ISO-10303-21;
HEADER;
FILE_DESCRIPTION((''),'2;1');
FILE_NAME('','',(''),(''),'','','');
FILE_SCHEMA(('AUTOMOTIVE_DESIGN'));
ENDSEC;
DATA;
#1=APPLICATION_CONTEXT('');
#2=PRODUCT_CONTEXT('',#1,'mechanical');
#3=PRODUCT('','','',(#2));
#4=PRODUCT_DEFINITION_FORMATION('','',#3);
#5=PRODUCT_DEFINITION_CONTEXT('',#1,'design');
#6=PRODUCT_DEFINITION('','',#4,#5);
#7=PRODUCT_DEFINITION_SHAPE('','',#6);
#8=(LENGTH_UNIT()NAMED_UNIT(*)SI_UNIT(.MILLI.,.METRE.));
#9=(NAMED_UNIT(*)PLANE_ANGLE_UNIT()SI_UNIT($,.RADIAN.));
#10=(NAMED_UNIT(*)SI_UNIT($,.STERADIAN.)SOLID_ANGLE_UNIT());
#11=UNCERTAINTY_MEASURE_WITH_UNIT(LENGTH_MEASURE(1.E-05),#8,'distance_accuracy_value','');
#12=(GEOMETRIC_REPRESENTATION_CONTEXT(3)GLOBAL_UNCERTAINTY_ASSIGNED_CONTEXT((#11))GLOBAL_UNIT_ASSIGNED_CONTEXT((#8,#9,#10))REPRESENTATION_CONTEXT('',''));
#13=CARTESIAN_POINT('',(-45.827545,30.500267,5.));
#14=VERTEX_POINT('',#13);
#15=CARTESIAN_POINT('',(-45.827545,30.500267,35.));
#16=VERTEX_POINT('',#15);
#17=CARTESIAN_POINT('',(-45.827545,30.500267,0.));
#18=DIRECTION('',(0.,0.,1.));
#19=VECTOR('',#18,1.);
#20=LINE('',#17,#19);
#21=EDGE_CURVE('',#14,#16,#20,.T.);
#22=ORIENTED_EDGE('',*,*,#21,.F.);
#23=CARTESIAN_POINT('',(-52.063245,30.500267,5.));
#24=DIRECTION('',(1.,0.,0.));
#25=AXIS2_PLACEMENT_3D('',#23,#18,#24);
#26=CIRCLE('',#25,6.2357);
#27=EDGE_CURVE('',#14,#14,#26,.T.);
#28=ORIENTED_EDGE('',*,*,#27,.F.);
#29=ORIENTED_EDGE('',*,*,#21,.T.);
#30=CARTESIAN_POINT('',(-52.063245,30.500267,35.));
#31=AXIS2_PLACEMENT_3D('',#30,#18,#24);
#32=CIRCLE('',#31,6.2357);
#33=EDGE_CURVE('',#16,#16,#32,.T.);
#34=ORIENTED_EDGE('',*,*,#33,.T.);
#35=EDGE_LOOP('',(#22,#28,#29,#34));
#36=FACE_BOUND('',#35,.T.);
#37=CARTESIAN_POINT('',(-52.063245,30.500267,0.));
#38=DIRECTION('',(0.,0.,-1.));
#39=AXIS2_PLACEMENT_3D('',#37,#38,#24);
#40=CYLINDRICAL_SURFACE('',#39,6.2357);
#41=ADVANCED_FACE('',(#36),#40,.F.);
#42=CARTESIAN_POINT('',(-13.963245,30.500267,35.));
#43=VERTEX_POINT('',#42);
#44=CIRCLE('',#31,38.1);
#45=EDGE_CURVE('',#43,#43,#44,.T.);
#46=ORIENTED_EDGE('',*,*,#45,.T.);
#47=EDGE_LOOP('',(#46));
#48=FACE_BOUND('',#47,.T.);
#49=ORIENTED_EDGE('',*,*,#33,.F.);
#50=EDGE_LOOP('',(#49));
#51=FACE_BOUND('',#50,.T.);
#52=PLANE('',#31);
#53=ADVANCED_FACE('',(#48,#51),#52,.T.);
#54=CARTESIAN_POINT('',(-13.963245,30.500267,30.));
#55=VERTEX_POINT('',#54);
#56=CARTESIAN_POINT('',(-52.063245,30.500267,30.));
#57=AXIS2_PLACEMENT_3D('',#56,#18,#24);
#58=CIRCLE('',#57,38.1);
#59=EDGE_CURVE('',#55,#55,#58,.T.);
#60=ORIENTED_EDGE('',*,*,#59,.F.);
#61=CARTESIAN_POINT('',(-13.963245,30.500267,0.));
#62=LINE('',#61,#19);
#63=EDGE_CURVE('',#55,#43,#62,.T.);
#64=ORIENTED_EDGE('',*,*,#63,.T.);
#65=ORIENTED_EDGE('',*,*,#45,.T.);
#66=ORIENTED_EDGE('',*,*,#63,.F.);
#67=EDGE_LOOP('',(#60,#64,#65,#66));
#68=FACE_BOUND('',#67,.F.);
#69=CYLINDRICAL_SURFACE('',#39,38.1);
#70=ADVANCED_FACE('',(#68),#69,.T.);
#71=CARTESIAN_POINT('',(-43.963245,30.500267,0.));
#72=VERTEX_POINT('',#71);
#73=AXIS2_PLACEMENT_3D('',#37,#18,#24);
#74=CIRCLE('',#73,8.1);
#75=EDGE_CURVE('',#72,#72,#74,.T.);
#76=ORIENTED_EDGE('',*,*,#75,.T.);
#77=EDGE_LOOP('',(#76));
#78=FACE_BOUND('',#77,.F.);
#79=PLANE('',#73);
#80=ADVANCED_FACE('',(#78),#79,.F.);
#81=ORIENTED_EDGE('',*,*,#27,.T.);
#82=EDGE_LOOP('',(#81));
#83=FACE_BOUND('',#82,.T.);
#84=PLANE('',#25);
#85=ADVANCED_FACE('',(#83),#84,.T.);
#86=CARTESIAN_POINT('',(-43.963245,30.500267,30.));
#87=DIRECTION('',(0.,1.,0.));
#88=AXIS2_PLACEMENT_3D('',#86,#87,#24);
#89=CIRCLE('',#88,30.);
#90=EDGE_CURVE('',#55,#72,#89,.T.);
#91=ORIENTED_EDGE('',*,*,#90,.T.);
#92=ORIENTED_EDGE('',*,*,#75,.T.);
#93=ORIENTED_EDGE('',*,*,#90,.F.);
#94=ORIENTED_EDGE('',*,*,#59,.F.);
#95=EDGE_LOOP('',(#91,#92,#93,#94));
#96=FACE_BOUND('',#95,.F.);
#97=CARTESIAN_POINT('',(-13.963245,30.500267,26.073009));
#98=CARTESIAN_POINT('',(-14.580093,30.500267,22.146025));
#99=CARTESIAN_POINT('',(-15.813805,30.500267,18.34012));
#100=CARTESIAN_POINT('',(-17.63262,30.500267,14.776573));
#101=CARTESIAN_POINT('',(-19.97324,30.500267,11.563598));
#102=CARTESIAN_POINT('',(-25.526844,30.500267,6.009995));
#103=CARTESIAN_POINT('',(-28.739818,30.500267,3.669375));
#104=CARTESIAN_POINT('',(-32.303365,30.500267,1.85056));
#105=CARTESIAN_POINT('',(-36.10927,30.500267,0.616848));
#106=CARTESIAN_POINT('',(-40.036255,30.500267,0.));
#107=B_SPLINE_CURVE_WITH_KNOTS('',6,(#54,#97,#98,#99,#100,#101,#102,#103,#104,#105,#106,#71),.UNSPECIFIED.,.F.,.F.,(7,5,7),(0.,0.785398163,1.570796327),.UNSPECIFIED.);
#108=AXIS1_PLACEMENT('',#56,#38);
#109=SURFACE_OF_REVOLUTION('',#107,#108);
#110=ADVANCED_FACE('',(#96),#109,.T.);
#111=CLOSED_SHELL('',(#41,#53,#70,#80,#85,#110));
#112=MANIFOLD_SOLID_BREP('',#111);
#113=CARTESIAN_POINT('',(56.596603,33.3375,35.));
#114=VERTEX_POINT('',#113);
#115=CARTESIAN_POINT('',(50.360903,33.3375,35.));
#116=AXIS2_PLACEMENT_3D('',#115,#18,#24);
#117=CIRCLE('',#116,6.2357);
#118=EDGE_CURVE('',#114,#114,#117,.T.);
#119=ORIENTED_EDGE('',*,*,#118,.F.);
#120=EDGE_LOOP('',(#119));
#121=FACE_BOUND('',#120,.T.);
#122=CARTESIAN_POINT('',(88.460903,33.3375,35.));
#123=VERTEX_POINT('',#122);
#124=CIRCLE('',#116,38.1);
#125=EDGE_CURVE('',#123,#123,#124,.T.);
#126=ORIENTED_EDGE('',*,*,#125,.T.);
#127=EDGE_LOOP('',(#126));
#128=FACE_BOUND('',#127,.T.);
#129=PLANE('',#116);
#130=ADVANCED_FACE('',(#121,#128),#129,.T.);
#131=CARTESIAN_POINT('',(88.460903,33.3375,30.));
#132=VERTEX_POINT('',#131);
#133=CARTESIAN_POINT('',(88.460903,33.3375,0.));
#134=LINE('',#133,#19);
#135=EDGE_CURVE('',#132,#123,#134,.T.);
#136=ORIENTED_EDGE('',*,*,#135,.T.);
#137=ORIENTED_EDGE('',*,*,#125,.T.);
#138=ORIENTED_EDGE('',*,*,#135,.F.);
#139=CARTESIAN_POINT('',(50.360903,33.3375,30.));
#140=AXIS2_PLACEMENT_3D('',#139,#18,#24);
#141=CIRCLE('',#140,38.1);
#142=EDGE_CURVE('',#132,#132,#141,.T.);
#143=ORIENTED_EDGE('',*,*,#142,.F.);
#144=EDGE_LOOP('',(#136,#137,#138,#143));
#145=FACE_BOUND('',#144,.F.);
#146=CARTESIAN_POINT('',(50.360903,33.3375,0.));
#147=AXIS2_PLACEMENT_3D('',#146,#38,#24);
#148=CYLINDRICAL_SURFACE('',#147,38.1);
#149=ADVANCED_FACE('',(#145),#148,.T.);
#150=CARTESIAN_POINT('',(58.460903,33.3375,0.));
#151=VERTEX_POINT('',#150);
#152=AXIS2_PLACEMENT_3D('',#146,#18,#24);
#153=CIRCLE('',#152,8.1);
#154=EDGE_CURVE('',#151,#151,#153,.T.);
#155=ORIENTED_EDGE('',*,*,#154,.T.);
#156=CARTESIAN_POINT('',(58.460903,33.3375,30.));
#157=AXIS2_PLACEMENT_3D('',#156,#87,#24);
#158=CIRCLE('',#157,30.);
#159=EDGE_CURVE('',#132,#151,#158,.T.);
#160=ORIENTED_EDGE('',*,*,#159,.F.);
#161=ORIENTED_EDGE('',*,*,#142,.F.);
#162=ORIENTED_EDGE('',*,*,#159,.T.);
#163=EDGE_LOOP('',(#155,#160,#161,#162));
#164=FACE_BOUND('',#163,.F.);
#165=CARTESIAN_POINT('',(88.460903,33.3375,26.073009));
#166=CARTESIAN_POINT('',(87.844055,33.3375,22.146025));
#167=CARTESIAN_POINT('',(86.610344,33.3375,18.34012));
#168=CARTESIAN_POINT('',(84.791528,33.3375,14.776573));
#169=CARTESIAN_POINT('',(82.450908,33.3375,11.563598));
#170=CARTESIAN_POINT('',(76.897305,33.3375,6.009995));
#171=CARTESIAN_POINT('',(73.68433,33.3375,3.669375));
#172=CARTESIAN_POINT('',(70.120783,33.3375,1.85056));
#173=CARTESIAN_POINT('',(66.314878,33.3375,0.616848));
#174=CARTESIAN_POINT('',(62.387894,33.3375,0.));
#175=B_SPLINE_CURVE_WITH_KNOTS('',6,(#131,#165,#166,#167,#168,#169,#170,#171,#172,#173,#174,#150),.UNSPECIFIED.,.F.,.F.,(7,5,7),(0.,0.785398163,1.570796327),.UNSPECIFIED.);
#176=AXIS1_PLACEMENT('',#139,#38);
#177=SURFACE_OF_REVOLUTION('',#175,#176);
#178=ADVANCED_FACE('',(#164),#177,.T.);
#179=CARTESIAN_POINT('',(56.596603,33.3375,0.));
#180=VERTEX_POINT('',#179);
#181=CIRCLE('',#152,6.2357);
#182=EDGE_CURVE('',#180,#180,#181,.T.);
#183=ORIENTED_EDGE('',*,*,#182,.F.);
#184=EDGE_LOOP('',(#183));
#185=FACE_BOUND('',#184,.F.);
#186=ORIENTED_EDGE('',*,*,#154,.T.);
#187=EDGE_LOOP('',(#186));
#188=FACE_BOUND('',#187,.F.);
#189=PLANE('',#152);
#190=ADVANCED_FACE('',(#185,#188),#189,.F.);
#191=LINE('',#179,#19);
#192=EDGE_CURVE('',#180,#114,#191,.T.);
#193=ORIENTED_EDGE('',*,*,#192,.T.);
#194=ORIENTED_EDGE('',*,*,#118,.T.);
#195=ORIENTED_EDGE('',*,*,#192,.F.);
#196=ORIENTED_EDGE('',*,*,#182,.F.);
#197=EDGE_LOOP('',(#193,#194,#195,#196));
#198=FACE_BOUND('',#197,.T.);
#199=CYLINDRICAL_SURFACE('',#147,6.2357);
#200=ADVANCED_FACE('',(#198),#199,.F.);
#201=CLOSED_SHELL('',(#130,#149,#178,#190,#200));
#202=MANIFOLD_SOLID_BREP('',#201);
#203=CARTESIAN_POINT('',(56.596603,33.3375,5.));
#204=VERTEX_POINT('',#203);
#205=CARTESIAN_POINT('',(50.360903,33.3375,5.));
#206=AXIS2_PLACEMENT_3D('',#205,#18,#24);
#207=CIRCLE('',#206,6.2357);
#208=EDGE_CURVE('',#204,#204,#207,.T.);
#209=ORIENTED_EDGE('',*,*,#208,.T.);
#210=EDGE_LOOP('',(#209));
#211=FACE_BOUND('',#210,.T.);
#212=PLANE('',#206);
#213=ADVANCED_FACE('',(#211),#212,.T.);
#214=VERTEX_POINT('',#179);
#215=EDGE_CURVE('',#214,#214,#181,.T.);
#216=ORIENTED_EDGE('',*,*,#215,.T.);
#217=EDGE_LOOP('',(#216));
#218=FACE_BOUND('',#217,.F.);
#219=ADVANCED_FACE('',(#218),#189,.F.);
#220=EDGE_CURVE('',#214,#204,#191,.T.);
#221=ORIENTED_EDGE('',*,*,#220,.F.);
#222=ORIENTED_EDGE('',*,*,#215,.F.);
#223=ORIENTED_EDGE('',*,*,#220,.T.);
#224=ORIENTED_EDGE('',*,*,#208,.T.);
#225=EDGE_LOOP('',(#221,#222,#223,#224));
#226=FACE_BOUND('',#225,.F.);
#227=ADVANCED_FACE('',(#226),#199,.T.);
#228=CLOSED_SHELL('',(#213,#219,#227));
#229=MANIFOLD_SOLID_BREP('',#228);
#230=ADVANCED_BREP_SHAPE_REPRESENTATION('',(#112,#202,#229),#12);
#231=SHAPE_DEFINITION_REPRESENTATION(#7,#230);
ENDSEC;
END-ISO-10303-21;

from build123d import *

# Parameters (mm, degrees)
F0_R     = 38.1
F0_R_2   = 6.2357
F1_DEPTH = 35
F2_R     = 30
F2_2_R   = 30
F3_DEPTH = 5


with BuildPart() as f1:
    # F0 (on Top) → F1 (new body)
    with BuildSketch(Plane.XY):
        with Locations((-52.0632453263, 30.500266701)):
            Circle(F0_R)
        with Locations((-52.0632453263, 30.500266701)):
            Circle(F0_R_2, mode=Mode.SUBTRACT)
    extrude(amount=F1_DEPTH)

    # F2
    f2_edges = [f1.edges().sort_by_distance(p)[0] for p in [
        (-90.163245, 30.500267, 0),
    ]]
    fillet(f2_edges, radius=F2_R)

    # F0 (on Top) → F3 (join)
    with BuildSketch(Plane.XY):
        with Locations((-52.0632453263, 30.500266701)):
            Circle(F0_R_2)
    extrude(amount=F3_DEPTH)


with BuildPart() as f1b:
    # F0 (on Top) → F1, piece 2 (new body)
    with BuildSketch(Plane.XY):
        with Locations((50.3609031439, 33.3374999464)):
            Circle(F0_R)
        with Locations((50.3609031439, 33.3374999464)):
            Circle(F0_R_2, mode=Mode.SUBTRACT)
    extrude(amount=F1_DEPTH)

    # F2#2
    f2_2_edges = [f1b.edges().sort_by_distance(p)[0] for p in [
        (12.260903, 33.3375, 0),
    ]]
    fillet(f2_2_edges, radius=F2_2_R)


with BuildPart() as f3:
    # F0 (on Top) → F3, piece 2 (new body)
    with BuildSketch(Plane.XY):
        with Locations((50.3609031439, 33.3374999464)):
            Circle(F0_R_2)
    extrude(amount=F3_DEPTH)


solid = Compound([f1.part, f1b.part, f3.part])
